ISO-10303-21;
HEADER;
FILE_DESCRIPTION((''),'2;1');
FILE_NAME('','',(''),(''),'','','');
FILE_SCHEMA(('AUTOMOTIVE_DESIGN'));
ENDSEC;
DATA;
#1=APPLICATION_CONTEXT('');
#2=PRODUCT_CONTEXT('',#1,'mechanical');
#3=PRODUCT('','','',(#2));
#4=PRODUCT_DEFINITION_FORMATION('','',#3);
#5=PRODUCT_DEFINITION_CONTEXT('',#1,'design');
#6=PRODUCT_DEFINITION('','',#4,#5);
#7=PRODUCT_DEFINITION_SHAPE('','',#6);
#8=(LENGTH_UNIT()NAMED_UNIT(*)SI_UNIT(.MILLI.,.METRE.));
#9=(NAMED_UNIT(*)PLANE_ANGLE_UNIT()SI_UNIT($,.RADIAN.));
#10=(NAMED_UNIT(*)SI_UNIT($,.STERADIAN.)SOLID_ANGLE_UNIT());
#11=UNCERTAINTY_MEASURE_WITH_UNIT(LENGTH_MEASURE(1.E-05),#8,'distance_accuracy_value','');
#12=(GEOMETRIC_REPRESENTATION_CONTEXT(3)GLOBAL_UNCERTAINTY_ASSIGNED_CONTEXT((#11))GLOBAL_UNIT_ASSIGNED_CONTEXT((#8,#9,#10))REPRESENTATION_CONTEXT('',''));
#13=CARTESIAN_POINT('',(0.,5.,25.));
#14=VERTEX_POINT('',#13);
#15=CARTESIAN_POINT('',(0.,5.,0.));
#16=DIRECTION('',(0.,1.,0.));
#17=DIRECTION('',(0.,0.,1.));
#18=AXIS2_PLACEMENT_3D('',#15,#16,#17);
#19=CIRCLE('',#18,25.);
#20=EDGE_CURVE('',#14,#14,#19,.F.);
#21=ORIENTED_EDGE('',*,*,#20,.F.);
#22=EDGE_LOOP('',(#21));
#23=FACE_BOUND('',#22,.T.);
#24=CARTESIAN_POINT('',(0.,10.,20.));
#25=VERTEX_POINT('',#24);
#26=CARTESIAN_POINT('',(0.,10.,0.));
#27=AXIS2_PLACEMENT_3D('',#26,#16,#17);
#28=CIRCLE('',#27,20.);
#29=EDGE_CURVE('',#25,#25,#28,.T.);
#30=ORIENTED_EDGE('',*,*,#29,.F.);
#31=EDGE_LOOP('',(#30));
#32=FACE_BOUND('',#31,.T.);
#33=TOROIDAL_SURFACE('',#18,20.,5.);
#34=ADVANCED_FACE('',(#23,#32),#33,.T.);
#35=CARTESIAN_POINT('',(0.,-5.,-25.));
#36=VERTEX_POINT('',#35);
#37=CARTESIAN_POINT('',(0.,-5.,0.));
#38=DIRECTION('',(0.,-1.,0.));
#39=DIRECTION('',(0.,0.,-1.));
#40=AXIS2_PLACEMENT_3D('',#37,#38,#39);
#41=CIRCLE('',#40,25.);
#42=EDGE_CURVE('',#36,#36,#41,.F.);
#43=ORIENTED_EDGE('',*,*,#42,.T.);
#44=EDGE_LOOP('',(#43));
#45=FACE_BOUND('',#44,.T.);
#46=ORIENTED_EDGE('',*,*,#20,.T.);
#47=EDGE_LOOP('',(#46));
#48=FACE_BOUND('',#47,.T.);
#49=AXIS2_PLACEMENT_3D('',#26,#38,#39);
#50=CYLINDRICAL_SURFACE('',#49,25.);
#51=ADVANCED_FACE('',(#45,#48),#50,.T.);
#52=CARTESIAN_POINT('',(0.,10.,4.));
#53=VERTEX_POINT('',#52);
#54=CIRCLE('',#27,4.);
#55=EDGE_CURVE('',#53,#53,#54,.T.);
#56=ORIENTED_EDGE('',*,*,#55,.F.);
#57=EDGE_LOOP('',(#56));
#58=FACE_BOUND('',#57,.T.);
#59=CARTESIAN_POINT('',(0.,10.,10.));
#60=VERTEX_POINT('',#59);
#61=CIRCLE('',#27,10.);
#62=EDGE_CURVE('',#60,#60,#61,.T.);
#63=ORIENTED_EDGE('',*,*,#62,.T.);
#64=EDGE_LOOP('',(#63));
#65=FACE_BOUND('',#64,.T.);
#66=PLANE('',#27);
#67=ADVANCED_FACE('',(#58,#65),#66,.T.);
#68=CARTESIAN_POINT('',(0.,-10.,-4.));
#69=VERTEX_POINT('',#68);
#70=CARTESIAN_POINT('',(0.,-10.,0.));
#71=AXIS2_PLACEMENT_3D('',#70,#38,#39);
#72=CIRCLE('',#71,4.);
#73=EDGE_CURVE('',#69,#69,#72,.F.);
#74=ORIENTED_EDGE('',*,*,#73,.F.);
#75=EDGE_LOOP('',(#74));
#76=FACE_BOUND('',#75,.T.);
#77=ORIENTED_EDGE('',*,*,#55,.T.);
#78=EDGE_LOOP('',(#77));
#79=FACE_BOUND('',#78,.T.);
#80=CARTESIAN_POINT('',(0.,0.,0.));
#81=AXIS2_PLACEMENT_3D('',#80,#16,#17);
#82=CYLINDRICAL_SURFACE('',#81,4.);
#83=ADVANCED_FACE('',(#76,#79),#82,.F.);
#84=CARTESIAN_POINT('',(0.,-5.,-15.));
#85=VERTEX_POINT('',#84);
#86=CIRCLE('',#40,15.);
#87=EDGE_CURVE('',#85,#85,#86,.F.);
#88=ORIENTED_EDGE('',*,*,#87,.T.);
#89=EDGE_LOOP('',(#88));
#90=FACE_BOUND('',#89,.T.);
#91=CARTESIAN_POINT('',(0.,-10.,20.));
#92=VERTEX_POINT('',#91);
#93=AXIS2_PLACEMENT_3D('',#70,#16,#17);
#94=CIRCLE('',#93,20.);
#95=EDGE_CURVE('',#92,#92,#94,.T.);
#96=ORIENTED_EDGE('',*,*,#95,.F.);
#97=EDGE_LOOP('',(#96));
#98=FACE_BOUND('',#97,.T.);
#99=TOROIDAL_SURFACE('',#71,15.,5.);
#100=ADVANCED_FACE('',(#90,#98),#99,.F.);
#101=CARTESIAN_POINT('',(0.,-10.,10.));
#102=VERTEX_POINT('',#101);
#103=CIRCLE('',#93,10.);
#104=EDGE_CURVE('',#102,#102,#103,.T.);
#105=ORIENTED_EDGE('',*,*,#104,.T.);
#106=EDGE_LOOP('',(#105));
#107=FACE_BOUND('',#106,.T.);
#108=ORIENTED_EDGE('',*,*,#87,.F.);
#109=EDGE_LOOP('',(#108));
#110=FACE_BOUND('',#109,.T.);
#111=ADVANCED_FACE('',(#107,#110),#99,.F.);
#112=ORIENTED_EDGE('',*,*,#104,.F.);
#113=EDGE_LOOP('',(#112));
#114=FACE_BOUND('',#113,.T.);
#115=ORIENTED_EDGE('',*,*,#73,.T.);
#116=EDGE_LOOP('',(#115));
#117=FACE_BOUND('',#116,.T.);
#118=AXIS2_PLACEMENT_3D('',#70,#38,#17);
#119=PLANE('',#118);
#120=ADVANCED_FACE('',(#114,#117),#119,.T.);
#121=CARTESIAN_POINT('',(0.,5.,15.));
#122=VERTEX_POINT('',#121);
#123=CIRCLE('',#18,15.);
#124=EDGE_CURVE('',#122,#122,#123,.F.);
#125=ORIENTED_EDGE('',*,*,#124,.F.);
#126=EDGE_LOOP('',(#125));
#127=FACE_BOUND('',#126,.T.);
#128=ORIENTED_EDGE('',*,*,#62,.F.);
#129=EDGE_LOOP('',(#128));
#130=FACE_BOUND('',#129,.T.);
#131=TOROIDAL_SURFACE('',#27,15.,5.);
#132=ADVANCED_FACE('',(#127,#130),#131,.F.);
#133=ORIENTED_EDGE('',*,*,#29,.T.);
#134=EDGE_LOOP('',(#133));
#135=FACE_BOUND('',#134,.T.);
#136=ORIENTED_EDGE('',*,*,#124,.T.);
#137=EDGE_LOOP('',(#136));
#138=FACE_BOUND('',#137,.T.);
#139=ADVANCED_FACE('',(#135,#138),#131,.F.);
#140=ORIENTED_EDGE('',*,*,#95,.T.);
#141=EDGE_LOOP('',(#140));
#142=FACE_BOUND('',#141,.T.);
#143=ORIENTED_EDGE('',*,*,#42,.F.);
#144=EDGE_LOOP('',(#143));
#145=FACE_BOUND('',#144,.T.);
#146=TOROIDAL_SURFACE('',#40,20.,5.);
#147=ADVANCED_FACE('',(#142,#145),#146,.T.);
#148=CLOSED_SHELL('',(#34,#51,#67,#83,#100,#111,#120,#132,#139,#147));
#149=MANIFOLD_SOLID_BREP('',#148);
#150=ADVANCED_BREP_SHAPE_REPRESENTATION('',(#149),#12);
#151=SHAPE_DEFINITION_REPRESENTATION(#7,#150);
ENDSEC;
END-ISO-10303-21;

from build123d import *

# Parameters (mm, degrees)
SZKIC1_R                    = 25
DODANIE_WYCI_GNI_CIE1_DEPTH = 10
SZKIC2_R                    = 20
SZKIC2_R_2                  = 10
WYTNIJ_WYCI_GNI_CIE1_DEPTH  = 5
ZAOKR_GLENIE1_R             = 5
SZKIC3_R                    = 4
WYTNIJ_WYCI_GNI_CIE2_DEPTH  = 37.742346142
ZAOKR_GLENIE2_R             = 5
ZAOKR_GLENIE1_OF_LUSTRO1_R  = 5
ZAOKR_GLENIE2_OF_LUSTRO1_R  = 5


with BuildPart() as part:
    # Szkic1 → Dodanie-wyciągnięcie1 (new body)
    with BuildSketch(Plane(origin=(0, 0, 0), x_dir=(1, 0, 0), z_dir=(0, 1, 0))):
        with Locations(Location((0, 0, 0), (0, 0, 270))):
            Circle(SZKIC1_R)
    dodanie_wyci_gni_cie1 = extrude(amount=DODANIE_WYCI_GNI_CIE1_DEPTH)

    # Szkic2 → Wytnij-wyciągnięcie1 (cut)
    with BuildSketch(Plane(origin=(0, 10, 0), x_dir=(1, 0, 0), z_dir=(0, 1, 0))):
        with Locations(Location((0, 0, 0), (0, 0, 270))):
            Circle(SZKIC2_R)
        with Locations(Location((0, 0, 0), (0, 0, 270))):
            Circle(SZKIC2_R_2, mode=Mode.SUBTRACT)
    wytnij_wyci_gni_cie1 = extrude(amount=-WYTNIJ_WYCI_GNI_CIE1_DEPTH, mode=Mode.SUBTRACT)

    # Zaokrąglenie1
    zaokr_glenie1_edges = [part.edges().sort_by_distance(p)[0] for p in [
        (0, 5, -20),
        (0, 5, -10),
    ]]
    fillet(zaokr_glenie1_edges, radius=ZAOKR_GLENIE1_R - 0.0001)  # a hair under: the kernel refuses the full size

    # Szkic3 → Wytnij-wyciągnięcie2 (cut, symmetric)
    with BuildSketch(Plane(origin=(0, 10, 0), x_dir=(1, 0, 0), z_dir=(0, 1, 0))):
        with Locations(Location((0, 0, 0), (0, 0, 270))):
            Circle(SZKIC3_R)
    wytnij_wyci_gni_cie2 = extrude(amount=WYTNIJ_WYCI_GNI_CIE2_DEPTH, both=True, mode=Mode.SUBTRACT)

    # Zaokrąglenie2
    zaokr_glenie2_edges = [part.edges().sort_by_distance(p)[0] for p in [
        (0, 10, -25),
    ]]
    fillet(zaokr_glenie2_edges, radius=ZAOKR_GLENIE2_R - 0.0001)  # a hair under: the kernel refuses the full size

    # Lustro1: Dodanie-wyciągnięcie1, Wytnij-wyciągnięcie1, Wytnij-wyciągnięcie2 across plane
    add(dodanie_wyci_gni_cie1.mirror(Plane.ZX))
    add(wytnij_wyci_gni_cie1.mirror(Plane.ZX), mode=Mode.SUBTRACT)
    add(wytnij_wyci_gni_cie2.mirror(Plane.ZX), mode=Mode.SUBTRACT)

    # Zaokrąglenie1 of Lustro1
    zaokr_glenie1_of_lustro1_edges = [part.edges().sort_by_distance(p)[0] for p in [
        (0, -5, -20),
        (0, -5, -10),
    ]]
    fillet(zaokr_glenie1_of_lustro1_edges, radius=ZAOKR_GLENIE1_OF_LUSTRO1_R - 0.0001)  # a hair under: the kernel refuses the full size

    # Zaokrąglenie2 of Lustro1
    zaokr_glenie2_of_lustro1_edges = [part.edges().sort_by_distance(p)[0] for p in [
        (0, -10, -25),
    ]]
    fillet(zaokr_glenie2_of_lustro1_edges, radius=ZAOKR_GLENIE2_OF_LUSTRO1_R - 0.0001)  # a hair under: the kernel refuses the full size


solid = part.part
